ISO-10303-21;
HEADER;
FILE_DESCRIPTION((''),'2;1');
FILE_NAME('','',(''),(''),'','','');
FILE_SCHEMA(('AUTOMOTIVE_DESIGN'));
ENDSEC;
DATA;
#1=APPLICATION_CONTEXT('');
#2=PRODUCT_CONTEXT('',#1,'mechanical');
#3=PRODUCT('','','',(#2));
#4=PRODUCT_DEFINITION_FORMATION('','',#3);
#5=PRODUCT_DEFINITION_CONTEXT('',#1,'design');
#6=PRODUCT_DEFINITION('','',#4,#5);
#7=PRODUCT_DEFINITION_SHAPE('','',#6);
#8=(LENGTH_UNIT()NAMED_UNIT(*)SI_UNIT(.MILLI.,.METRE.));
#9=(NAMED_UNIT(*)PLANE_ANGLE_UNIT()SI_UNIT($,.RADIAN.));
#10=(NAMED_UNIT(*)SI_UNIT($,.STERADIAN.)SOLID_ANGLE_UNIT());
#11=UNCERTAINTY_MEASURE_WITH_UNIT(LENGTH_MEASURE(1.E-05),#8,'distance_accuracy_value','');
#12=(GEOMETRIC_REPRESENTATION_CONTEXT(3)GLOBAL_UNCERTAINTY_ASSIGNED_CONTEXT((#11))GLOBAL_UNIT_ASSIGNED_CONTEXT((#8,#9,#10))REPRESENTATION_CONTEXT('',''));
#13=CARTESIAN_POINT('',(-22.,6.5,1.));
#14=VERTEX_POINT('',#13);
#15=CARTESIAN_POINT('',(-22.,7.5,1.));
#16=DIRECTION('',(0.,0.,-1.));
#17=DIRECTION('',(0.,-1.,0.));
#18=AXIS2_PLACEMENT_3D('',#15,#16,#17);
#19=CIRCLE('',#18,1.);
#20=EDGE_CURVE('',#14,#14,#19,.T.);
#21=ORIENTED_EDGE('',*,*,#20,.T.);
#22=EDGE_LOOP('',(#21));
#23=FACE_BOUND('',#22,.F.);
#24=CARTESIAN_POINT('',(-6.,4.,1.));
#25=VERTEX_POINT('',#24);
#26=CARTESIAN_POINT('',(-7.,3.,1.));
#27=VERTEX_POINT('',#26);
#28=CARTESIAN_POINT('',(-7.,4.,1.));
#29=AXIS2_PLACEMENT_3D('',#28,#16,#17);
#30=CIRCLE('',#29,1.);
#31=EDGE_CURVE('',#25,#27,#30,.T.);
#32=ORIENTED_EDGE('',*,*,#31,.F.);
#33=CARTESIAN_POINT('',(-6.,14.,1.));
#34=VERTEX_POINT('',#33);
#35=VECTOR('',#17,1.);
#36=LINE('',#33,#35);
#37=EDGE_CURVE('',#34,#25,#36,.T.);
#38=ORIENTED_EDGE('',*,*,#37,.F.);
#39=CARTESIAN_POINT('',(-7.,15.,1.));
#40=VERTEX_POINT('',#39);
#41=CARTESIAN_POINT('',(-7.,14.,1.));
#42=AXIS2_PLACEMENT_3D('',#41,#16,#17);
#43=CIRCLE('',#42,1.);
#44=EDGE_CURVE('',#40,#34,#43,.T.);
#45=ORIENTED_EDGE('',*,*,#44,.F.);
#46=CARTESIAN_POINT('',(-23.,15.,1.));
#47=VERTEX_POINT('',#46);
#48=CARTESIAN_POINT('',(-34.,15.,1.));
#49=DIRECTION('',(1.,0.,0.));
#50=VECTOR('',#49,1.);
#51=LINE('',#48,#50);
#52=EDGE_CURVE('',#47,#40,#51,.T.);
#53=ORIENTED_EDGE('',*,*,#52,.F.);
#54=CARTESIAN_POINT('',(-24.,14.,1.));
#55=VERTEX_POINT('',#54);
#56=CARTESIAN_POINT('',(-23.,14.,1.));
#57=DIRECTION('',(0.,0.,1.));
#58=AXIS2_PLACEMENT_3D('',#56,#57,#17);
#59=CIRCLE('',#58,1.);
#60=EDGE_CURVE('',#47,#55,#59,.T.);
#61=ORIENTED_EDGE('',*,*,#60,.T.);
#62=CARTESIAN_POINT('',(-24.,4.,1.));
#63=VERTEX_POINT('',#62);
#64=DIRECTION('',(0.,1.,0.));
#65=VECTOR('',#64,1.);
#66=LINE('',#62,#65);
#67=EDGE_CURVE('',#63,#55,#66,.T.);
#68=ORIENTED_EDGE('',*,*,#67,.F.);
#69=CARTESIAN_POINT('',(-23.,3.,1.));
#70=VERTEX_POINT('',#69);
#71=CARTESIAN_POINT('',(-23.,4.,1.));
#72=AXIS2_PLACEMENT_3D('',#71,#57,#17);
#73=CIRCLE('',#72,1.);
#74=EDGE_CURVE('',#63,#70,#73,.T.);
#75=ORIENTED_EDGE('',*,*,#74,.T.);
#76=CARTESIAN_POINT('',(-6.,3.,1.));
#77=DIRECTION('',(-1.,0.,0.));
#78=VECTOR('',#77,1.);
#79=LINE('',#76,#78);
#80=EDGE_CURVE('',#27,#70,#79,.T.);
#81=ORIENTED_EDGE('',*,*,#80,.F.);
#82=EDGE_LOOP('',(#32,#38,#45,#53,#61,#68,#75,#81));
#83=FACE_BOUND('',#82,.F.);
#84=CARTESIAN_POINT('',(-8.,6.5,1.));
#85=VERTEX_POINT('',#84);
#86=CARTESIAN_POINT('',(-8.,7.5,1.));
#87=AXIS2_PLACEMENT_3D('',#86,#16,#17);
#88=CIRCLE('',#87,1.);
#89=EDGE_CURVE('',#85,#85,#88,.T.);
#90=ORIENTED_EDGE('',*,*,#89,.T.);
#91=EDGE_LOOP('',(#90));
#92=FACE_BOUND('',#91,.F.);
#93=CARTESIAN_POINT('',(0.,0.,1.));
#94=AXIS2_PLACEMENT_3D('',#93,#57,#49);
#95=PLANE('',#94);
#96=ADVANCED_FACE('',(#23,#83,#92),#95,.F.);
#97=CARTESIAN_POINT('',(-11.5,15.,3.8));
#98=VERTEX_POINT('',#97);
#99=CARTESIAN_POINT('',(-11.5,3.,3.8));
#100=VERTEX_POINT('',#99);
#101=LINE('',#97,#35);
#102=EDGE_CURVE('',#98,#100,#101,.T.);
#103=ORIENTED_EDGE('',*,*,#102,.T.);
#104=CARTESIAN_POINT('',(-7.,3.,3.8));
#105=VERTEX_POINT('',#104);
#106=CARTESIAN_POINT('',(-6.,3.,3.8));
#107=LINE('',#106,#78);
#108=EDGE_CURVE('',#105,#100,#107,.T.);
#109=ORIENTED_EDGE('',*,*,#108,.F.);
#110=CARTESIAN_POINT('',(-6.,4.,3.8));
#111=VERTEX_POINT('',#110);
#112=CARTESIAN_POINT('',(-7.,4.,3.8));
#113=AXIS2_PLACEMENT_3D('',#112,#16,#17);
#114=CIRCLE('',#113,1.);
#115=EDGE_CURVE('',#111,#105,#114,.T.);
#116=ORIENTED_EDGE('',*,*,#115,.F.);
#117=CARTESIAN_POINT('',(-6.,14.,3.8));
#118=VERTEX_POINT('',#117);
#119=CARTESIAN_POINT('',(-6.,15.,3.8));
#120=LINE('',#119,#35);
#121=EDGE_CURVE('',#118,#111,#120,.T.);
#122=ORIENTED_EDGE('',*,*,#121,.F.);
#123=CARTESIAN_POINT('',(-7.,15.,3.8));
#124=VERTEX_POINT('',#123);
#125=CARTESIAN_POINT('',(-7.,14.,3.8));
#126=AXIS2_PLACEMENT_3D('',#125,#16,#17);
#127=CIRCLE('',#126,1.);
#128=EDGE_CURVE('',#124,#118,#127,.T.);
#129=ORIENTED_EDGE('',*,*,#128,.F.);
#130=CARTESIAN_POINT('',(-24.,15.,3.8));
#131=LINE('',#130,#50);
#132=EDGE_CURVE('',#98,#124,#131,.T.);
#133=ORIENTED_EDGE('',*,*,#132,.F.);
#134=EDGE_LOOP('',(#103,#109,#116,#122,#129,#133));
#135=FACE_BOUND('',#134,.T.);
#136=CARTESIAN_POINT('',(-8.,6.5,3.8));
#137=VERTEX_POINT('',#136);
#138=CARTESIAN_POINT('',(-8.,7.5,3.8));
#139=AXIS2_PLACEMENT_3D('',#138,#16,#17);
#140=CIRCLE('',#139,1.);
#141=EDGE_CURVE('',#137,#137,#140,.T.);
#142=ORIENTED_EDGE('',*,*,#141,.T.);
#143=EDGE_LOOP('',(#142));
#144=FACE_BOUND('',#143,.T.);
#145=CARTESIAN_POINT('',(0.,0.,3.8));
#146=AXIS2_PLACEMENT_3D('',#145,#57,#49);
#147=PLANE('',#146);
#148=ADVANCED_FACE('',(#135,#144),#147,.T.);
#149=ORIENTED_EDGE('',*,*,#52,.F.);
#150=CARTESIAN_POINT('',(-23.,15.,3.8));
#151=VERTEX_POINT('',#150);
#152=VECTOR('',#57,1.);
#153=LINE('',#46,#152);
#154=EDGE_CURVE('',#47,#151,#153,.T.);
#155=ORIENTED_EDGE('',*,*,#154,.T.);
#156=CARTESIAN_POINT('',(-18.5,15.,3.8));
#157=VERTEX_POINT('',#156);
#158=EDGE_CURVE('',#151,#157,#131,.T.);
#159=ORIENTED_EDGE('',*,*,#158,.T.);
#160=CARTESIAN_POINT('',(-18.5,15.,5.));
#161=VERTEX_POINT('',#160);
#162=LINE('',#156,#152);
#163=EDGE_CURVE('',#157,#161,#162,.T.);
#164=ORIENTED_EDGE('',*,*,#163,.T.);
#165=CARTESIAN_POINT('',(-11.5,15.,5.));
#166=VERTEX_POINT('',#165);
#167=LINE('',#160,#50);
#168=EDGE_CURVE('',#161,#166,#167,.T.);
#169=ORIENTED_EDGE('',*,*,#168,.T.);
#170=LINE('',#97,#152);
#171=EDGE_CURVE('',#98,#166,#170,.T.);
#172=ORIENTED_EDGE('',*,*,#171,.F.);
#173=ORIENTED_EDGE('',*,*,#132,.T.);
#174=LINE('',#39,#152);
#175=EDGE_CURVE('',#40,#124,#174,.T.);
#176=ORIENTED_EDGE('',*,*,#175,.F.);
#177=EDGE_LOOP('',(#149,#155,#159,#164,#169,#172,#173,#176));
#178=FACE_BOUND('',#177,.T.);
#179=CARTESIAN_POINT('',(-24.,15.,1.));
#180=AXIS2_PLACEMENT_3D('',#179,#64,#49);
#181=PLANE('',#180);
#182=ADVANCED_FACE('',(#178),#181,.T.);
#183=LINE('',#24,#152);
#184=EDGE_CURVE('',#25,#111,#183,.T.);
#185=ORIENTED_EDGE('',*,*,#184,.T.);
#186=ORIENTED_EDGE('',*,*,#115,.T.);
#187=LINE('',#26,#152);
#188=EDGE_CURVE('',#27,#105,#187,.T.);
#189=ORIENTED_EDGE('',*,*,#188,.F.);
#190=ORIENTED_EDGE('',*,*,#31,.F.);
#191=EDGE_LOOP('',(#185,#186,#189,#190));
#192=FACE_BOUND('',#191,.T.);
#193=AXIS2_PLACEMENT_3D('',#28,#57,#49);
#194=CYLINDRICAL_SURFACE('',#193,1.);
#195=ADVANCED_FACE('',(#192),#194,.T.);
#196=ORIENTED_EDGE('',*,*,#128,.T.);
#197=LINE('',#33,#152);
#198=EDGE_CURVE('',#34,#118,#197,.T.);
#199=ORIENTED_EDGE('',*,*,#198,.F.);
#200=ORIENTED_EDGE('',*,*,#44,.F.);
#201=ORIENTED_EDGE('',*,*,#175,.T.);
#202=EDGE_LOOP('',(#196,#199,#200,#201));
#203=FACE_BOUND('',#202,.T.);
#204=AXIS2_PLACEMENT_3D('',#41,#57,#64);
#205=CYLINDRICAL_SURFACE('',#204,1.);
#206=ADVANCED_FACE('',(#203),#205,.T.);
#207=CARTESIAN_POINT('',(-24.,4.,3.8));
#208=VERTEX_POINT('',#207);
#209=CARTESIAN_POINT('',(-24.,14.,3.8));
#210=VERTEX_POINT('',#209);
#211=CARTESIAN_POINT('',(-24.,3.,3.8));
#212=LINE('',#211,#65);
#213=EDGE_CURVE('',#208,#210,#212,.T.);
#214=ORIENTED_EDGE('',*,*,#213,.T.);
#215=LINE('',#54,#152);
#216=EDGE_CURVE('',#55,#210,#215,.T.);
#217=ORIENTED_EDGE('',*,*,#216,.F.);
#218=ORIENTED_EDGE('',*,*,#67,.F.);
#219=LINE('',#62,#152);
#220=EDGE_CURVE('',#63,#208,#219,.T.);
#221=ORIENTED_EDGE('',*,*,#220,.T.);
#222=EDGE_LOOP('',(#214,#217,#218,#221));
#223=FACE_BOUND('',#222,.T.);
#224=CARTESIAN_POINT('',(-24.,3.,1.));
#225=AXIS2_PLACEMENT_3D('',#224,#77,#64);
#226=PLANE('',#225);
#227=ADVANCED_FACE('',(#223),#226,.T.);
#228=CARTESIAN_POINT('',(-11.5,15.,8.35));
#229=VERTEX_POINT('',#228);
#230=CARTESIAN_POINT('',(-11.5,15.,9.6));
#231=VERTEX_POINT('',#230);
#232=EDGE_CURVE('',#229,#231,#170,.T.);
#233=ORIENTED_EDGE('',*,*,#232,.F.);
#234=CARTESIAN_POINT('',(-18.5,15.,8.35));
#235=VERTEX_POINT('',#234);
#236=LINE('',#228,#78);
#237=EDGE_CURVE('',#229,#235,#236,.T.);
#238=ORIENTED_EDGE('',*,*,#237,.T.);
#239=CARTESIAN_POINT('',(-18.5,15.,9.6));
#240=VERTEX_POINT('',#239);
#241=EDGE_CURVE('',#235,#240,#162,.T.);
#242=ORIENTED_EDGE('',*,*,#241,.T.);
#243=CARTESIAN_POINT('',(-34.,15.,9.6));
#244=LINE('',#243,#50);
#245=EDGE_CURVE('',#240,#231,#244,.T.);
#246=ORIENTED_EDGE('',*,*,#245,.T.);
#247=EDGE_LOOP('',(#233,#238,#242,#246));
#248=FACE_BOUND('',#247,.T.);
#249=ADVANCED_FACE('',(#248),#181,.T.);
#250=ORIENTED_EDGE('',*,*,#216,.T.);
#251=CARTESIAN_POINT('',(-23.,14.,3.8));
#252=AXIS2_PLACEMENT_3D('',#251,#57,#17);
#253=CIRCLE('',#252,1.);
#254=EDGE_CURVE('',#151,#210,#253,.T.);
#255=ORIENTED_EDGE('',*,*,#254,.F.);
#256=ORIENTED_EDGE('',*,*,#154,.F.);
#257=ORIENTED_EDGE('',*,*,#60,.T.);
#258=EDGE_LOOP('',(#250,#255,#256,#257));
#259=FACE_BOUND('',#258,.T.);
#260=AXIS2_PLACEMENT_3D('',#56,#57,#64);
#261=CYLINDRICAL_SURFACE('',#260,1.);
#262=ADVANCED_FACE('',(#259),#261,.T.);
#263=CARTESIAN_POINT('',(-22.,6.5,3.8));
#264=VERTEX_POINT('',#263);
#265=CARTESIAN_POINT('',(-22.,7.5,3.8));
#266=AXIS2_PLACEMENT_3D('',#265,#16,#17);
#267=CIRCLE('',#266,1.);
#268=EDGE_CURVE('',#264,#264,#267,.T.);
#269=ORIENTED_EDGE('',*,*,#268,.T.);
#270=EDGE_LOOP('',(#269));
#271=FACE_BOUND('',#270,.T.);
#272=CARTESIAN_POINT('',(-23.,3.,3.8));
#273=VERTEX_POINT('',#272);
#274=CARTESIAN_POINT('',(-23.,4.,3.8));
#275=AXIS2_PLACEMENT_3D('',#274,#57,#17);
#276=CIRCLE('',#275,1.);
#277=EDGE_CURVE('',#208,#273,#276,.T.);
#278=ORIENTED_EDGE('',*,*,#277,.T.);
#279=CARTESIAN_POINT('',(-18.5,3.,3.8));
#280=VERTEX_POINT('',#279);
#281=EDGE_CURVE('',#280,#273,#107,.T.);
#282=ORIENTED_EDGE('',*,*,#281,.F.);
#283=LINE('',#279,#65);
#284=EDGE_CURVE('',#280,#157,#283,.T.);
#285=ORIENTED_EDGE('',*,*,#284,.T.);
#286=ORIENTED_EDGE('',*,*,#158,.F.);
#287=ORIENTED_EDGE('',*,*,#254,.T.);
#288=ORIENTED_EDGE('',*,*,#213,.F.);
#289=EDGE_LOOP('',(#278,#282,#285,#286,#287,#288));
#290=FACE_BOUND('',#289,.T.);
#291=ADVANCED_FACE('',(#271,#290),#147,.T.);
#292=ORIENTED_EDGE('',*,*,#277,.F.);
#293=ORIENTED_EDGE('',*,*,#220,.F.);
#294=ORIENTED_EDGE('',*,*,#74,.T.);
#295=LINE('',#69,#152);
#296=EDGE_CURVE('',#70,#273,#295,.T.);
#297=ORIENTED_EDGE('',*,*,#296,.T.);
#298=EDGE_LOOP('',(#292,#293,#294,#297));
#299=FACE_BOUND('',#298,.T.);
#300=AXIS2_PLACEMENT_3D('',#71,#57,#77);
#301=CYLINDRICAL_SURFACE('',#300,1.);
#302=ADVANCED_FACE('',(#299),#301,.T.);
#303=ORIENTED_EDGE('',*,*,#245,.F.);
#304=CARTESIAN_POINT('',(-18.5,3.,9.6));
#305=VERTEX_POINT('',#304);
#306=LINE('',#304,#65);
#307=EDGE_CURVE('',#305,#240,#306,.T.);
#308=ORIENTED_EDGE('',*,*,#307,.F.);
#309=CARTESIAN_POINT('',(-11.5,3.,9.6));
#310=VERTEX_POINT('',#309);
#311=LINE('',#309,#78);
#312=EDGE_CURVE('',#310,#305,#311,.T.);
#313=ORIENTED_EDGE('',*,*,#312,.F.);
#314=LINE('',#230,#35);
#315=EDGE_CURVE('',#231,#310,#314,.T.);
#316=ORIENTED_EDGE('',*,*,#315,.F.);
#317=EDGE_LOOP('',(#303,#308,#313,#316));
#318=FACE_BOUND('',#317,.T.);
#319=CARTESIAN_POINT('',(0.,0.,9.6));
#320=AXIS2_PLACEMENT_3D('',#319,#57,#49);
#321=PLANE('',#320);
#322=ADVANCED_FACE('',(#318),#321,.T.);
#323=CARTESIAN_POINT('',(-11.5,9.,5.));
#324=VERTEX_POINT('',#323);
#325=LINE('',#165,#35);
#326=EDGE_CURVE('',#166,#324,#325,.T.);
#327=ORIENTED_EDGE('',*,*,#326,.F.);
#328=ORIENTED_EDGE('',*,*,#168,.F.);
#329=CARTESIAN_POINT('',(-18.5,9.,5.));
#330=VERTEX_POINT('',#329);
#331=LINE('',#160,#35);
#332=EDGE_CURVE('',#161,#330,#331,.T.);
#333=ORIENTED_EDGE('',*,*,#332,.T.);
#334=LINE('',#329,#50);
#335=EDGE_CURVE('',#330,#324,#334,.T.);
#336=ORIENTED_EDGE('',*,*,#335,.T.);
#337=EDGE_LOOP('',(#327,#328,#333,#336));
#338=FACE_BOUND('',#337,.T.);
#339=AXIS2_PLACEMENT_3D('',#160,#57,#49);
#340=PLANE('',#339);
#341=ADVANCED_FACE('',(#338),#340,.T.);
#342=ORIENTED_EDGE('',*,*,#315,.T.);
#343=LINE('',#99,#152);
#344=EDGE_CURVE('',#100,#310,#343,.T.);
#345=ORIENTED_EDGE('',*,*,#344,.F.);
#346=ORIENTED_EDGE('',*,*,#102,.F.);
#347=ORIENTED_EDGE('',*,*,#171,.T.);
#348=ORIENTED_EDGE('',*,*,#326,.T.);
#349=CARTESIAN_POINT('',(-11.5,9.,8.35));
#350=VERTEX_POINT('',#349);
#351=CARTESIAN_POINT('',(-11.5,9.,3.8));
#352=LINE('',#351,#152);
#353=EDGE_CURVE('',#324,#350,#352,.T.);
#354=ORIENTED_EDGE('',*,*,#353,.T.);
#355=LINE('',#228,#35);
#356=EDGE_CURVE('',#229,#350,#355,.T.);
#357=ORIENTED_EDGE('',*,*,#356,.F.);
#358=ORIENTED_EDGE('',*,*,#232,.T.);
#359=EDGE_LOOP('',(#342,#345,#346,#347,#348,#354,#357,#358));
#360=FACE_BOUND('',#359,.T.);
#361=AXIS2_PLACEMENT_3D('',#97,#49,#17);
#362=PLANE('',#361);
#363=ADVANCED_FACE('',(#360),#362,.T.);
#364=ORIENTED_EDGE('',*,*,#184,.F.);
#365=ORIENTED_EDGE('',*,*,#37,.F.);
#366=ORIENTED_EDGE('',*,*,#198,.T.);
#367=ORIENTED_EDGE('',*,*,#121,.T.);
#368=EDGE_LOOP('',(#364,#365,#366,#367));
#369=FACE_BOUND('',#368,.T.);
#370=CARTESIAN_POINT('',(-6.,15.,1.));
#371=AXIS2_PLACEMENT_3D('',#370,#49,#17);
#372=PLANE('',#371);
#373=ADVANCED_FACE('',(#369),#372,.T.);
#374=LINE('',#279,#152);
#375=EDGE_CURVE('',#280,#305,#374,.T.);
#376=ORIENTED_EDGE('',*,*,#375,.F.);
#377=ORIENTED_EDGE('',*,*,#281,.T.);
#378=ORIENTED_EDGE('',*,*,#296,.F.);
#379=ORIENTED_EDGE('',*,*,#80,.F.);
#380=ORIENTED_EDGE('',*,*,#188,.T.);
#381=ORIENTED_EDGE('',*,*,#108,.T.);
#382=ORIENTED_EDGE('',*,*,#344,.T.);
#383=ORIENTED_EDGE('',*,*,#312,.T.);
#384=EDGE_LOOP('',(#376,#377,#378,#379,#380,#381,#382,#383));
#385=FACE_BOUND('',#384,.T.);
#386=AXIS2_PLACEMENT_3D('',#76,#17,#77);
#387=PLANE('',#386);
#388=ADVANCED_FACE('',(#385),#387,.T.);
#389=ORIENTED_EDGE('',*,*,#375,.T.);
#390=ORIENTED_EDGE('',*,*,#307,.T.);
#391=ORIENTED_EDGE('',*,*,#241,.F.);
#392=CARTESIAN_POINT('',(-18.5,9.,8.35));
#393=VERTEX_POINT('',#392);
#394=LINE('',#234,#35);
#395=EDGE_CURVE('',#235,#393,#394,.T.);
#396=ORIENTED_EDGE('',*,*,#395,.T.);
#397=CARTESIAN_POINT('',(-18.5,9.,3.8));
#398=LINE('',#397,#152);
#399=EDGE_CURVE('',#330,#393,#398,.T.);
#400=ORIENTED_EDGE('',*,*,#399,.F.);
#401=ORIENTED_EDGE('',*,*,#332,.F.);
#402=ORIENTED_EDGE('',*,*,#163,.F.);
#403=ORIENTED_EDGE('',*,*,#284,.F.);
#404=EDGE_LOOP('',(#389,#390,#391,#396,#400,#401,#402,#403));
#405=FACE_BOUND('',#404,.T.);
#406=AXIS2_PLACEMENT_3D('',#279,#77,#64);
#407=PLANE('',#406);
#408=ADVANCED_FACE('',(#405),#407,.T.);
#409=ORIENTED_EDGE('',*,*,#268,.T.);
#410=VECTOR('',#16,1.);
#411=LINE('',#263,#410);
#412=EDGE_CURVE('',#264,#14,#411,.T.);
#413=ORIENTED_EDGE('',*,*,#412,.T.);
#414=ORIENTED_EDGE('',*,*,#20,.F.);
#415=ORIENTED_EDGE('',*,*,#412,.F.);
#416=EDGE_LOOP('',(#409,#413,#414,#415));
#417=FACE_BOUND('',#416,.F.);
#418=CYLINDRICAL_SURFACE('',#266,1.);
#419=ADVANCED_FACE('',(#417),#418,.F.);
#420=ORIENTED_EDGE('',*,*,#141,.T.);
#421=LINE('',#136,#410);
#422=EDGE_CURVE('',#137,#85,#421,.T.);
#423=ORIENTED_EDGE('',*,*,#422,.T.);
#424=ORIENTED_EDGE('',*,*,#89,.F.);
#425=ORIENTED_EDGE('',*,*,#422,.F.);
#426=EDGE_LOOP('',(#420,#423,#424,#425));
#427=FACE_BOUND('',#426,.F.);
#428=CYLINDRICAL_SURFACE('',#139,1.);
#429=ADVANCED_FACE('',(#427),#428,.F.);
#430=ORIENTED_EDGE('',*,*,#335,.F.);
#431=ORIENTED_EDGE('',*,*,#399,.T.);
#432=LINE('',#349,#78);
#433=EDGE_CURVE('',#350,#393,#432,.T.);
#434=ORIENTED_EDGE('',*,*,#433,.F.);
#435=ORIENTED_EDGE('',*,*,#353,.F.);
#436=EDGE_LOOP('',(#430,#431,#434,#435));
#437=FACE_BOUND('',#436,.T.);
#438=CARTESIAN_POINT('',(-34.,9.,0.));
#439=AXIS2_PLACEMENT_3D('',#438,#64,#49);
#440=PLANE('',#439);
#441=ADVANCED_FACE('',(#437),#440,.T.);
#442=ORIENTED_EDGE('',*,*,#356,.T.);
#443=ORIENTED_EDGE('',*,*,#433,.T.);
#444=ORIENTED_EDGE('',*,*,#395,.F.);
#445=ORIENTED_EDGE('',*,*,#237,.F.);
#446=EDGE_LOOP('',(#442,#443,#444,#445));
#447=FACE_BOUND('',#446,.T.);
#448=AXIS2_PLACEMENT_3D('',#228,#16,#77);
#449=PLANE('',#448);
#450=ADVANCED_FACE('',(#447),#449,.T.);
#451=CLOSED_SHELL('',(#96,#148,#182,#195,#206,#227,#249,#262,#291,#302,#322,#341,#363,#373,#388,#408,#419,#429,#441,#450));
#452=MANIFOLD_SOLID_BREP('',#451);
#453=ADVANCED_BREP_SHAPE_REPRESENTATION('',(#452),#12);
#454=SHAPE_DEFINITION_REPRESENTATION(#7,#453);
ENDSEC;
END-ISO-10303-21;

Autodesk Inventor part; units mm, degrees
ref_plane "YZ Plane" through (0, 0, 0) normal (1, 0, 0) x (0, 1, 0)
ref_plane "XZ Plane" through (0, 0, 0) normal (0, 1, 0) x (-1, 0, 0)
ref_plane "XY Plane" through (0, 0, 0) normal (0, 0, 1) x (1, 0, 0)
sketch "Sketch1" plane through (0, 0, 0) normal (0, 0, 1) x (1, 0, 0)
  point P0 (0, 0)
sketch "Sketch2" plane through (0, 0, 0) normal (0, 0, 1) x (1, 0, 0)
  line L0 (0, 0) -> (-34, 0)
  line L1 (-34, 0) -> (-34, 15)
  line L2 (-34, 15) -> (0, 15)
  line L3 (0, 15) -> (0, 0)
  dimension "d0" = 34
  dimension "d1" = 15
extrude "Extrusion1" add sketch "Sketch2" along normal blind 1
sketch "Sketch3" plane through (0, 0, 1) normal (0, 0, 1) x (1, 0, 0)
  line L0 (0, 0) -> (0, 15) projected
  point P0 (-8, 7.5)
  point P1 (-22, 7.5)
  dimension "d4" = 14
  dimension "d5" = 8
hole "Hole1" at (-22, 7.5, 1) at (-8, 7.5, 1) direction (0, 0, -1) diameter 4.5 end through all
sketch "Sketch4" plane through (0, 0, 1) normal (0, 0, 1) x (1, 0, 0)
  line L0 (-24, 15) -> (-6, 15)
  line L1 (-6, 15) -> (-6, 3)
  line L2 (-6, 3) -> (-24, 3)
  line L3 (-24, 3) -> (-24, 15)
  line L4 (0, 0) -> (0, 15) projected
  dimension "d13" = 18
  dimension "d14" = 12
  dimension "d15" = 6
extrude "Extrusion2" add sketch "Sketch4" along normal blind 2.8
sketch "Sketch6" plane through (0, 0, 3.8) normal (0, 0, 1) x (1, 0, 0)
  arc A0 (-24, 6.4692) -> (-24, 8.5308) centre (-22, 7.5) ccw projected
  arc A1 (-6, 8.5308) -> (-6, 6.4692) centre (-8, 7.5) ccw projected
  point P0 (0, 0)
hole "Hole2" at (-8, 7.5, 3.8) at (-22, 7.5, 3.8) direction (0, 0, -1) diameter 2 end through all
sketch "Sketch5" plane through (0, 0, 3.8) normal (0, 0, 1) x (1, 0, 0)
  line L0 (-34, 15) -> (0, 15) projected
  line L1 (-18.5, 15) -> (-11.5, 15)
  line L2 (-11.5, 15) -> (-11.5, 3)
  line L3 (-11.5, 3) -> (-18.5, 3)
  line L4 (-18.5, 3) -> (-18.5, 15)
  line L5 (-24, 15) -> (-24, 3) projected
  line L6 (-6, 3) -> (-6, 15) projected
  point P0 (0, 0)
  dimension "d18" = 7
  dimension "d19" = 0
  dimension "d20" = 5.5
  dimension "d21" = 5.5
extrude "Extrusion3" add sketch "Sketch5" along normal blind 5.8
sketch "Sketch7" plane through (-34, 15, 0) normal (0, 1, 0) x (1, 0, 0)
  line L0 (0, 0) -> (34, 0) projected
  line L1 (0, 0) -> (0, -1) projected
  line L2 (10, -1) -> (0, -1) projected
  line L3 (10, -1) -> (10, -3.8) projected
  line L4 (15.5, -3.8) -> (10, -3.8) projected
  line L5 (15.5, -3.8) -> (15.5, -9.6) projected
  line L6 (22.5, -9.6) -> (15.5, -9.6) projected
  line L7 (22.5, -3.8) -> (22.5, -9.6) projected
  line L8 (28, -3.8) -> (22.5, -3.8) projected
  line L9 (28, -1) -> (28, -3.8) projected
  line L10 (34, -1) -> (28, -1) projected
  line L11 (34, 0) -> (34, -1) projected
  line L12 (15.5, -3.8) -> (15.5, -9.6) projected
  line L13 (22.5, -8.35) -> (15.5, -8.35)
  line L14 (15.5, -8.35) -> (15.5, -5)
  line L15 (15.5, -5) -> (22.5, -5)
  line L16 (22.5, -5) -> (22.5, -8.35)
  dimension "d31" = 5
  dimension "d32" = 1.25
extrude "Extrusion4" cut sketch "Sketch7" against normal blind 6 contours L15 L7 L13 L5
sketch "Sketch8" plane through (0, 0, 1) normal (0, 0, 1) x (1, 0, 0)
  point P0 (0, 0)
fillet "Fillet1" radius 1 8 edges at (-34, 0, 0.5) (0, 0, 0.5) (0, 15, 0.5) (-34, 15, 0.5) (-6, 15, 2.4) (-6, 3, 2.4) (-24, 15, 2.4) (-24, 3, 2.4)
move faces "Move1" translate (0, 0, 1) faces at (-18.4872, 1.7718, 0)
properties part number "Z-linear-encoder"
